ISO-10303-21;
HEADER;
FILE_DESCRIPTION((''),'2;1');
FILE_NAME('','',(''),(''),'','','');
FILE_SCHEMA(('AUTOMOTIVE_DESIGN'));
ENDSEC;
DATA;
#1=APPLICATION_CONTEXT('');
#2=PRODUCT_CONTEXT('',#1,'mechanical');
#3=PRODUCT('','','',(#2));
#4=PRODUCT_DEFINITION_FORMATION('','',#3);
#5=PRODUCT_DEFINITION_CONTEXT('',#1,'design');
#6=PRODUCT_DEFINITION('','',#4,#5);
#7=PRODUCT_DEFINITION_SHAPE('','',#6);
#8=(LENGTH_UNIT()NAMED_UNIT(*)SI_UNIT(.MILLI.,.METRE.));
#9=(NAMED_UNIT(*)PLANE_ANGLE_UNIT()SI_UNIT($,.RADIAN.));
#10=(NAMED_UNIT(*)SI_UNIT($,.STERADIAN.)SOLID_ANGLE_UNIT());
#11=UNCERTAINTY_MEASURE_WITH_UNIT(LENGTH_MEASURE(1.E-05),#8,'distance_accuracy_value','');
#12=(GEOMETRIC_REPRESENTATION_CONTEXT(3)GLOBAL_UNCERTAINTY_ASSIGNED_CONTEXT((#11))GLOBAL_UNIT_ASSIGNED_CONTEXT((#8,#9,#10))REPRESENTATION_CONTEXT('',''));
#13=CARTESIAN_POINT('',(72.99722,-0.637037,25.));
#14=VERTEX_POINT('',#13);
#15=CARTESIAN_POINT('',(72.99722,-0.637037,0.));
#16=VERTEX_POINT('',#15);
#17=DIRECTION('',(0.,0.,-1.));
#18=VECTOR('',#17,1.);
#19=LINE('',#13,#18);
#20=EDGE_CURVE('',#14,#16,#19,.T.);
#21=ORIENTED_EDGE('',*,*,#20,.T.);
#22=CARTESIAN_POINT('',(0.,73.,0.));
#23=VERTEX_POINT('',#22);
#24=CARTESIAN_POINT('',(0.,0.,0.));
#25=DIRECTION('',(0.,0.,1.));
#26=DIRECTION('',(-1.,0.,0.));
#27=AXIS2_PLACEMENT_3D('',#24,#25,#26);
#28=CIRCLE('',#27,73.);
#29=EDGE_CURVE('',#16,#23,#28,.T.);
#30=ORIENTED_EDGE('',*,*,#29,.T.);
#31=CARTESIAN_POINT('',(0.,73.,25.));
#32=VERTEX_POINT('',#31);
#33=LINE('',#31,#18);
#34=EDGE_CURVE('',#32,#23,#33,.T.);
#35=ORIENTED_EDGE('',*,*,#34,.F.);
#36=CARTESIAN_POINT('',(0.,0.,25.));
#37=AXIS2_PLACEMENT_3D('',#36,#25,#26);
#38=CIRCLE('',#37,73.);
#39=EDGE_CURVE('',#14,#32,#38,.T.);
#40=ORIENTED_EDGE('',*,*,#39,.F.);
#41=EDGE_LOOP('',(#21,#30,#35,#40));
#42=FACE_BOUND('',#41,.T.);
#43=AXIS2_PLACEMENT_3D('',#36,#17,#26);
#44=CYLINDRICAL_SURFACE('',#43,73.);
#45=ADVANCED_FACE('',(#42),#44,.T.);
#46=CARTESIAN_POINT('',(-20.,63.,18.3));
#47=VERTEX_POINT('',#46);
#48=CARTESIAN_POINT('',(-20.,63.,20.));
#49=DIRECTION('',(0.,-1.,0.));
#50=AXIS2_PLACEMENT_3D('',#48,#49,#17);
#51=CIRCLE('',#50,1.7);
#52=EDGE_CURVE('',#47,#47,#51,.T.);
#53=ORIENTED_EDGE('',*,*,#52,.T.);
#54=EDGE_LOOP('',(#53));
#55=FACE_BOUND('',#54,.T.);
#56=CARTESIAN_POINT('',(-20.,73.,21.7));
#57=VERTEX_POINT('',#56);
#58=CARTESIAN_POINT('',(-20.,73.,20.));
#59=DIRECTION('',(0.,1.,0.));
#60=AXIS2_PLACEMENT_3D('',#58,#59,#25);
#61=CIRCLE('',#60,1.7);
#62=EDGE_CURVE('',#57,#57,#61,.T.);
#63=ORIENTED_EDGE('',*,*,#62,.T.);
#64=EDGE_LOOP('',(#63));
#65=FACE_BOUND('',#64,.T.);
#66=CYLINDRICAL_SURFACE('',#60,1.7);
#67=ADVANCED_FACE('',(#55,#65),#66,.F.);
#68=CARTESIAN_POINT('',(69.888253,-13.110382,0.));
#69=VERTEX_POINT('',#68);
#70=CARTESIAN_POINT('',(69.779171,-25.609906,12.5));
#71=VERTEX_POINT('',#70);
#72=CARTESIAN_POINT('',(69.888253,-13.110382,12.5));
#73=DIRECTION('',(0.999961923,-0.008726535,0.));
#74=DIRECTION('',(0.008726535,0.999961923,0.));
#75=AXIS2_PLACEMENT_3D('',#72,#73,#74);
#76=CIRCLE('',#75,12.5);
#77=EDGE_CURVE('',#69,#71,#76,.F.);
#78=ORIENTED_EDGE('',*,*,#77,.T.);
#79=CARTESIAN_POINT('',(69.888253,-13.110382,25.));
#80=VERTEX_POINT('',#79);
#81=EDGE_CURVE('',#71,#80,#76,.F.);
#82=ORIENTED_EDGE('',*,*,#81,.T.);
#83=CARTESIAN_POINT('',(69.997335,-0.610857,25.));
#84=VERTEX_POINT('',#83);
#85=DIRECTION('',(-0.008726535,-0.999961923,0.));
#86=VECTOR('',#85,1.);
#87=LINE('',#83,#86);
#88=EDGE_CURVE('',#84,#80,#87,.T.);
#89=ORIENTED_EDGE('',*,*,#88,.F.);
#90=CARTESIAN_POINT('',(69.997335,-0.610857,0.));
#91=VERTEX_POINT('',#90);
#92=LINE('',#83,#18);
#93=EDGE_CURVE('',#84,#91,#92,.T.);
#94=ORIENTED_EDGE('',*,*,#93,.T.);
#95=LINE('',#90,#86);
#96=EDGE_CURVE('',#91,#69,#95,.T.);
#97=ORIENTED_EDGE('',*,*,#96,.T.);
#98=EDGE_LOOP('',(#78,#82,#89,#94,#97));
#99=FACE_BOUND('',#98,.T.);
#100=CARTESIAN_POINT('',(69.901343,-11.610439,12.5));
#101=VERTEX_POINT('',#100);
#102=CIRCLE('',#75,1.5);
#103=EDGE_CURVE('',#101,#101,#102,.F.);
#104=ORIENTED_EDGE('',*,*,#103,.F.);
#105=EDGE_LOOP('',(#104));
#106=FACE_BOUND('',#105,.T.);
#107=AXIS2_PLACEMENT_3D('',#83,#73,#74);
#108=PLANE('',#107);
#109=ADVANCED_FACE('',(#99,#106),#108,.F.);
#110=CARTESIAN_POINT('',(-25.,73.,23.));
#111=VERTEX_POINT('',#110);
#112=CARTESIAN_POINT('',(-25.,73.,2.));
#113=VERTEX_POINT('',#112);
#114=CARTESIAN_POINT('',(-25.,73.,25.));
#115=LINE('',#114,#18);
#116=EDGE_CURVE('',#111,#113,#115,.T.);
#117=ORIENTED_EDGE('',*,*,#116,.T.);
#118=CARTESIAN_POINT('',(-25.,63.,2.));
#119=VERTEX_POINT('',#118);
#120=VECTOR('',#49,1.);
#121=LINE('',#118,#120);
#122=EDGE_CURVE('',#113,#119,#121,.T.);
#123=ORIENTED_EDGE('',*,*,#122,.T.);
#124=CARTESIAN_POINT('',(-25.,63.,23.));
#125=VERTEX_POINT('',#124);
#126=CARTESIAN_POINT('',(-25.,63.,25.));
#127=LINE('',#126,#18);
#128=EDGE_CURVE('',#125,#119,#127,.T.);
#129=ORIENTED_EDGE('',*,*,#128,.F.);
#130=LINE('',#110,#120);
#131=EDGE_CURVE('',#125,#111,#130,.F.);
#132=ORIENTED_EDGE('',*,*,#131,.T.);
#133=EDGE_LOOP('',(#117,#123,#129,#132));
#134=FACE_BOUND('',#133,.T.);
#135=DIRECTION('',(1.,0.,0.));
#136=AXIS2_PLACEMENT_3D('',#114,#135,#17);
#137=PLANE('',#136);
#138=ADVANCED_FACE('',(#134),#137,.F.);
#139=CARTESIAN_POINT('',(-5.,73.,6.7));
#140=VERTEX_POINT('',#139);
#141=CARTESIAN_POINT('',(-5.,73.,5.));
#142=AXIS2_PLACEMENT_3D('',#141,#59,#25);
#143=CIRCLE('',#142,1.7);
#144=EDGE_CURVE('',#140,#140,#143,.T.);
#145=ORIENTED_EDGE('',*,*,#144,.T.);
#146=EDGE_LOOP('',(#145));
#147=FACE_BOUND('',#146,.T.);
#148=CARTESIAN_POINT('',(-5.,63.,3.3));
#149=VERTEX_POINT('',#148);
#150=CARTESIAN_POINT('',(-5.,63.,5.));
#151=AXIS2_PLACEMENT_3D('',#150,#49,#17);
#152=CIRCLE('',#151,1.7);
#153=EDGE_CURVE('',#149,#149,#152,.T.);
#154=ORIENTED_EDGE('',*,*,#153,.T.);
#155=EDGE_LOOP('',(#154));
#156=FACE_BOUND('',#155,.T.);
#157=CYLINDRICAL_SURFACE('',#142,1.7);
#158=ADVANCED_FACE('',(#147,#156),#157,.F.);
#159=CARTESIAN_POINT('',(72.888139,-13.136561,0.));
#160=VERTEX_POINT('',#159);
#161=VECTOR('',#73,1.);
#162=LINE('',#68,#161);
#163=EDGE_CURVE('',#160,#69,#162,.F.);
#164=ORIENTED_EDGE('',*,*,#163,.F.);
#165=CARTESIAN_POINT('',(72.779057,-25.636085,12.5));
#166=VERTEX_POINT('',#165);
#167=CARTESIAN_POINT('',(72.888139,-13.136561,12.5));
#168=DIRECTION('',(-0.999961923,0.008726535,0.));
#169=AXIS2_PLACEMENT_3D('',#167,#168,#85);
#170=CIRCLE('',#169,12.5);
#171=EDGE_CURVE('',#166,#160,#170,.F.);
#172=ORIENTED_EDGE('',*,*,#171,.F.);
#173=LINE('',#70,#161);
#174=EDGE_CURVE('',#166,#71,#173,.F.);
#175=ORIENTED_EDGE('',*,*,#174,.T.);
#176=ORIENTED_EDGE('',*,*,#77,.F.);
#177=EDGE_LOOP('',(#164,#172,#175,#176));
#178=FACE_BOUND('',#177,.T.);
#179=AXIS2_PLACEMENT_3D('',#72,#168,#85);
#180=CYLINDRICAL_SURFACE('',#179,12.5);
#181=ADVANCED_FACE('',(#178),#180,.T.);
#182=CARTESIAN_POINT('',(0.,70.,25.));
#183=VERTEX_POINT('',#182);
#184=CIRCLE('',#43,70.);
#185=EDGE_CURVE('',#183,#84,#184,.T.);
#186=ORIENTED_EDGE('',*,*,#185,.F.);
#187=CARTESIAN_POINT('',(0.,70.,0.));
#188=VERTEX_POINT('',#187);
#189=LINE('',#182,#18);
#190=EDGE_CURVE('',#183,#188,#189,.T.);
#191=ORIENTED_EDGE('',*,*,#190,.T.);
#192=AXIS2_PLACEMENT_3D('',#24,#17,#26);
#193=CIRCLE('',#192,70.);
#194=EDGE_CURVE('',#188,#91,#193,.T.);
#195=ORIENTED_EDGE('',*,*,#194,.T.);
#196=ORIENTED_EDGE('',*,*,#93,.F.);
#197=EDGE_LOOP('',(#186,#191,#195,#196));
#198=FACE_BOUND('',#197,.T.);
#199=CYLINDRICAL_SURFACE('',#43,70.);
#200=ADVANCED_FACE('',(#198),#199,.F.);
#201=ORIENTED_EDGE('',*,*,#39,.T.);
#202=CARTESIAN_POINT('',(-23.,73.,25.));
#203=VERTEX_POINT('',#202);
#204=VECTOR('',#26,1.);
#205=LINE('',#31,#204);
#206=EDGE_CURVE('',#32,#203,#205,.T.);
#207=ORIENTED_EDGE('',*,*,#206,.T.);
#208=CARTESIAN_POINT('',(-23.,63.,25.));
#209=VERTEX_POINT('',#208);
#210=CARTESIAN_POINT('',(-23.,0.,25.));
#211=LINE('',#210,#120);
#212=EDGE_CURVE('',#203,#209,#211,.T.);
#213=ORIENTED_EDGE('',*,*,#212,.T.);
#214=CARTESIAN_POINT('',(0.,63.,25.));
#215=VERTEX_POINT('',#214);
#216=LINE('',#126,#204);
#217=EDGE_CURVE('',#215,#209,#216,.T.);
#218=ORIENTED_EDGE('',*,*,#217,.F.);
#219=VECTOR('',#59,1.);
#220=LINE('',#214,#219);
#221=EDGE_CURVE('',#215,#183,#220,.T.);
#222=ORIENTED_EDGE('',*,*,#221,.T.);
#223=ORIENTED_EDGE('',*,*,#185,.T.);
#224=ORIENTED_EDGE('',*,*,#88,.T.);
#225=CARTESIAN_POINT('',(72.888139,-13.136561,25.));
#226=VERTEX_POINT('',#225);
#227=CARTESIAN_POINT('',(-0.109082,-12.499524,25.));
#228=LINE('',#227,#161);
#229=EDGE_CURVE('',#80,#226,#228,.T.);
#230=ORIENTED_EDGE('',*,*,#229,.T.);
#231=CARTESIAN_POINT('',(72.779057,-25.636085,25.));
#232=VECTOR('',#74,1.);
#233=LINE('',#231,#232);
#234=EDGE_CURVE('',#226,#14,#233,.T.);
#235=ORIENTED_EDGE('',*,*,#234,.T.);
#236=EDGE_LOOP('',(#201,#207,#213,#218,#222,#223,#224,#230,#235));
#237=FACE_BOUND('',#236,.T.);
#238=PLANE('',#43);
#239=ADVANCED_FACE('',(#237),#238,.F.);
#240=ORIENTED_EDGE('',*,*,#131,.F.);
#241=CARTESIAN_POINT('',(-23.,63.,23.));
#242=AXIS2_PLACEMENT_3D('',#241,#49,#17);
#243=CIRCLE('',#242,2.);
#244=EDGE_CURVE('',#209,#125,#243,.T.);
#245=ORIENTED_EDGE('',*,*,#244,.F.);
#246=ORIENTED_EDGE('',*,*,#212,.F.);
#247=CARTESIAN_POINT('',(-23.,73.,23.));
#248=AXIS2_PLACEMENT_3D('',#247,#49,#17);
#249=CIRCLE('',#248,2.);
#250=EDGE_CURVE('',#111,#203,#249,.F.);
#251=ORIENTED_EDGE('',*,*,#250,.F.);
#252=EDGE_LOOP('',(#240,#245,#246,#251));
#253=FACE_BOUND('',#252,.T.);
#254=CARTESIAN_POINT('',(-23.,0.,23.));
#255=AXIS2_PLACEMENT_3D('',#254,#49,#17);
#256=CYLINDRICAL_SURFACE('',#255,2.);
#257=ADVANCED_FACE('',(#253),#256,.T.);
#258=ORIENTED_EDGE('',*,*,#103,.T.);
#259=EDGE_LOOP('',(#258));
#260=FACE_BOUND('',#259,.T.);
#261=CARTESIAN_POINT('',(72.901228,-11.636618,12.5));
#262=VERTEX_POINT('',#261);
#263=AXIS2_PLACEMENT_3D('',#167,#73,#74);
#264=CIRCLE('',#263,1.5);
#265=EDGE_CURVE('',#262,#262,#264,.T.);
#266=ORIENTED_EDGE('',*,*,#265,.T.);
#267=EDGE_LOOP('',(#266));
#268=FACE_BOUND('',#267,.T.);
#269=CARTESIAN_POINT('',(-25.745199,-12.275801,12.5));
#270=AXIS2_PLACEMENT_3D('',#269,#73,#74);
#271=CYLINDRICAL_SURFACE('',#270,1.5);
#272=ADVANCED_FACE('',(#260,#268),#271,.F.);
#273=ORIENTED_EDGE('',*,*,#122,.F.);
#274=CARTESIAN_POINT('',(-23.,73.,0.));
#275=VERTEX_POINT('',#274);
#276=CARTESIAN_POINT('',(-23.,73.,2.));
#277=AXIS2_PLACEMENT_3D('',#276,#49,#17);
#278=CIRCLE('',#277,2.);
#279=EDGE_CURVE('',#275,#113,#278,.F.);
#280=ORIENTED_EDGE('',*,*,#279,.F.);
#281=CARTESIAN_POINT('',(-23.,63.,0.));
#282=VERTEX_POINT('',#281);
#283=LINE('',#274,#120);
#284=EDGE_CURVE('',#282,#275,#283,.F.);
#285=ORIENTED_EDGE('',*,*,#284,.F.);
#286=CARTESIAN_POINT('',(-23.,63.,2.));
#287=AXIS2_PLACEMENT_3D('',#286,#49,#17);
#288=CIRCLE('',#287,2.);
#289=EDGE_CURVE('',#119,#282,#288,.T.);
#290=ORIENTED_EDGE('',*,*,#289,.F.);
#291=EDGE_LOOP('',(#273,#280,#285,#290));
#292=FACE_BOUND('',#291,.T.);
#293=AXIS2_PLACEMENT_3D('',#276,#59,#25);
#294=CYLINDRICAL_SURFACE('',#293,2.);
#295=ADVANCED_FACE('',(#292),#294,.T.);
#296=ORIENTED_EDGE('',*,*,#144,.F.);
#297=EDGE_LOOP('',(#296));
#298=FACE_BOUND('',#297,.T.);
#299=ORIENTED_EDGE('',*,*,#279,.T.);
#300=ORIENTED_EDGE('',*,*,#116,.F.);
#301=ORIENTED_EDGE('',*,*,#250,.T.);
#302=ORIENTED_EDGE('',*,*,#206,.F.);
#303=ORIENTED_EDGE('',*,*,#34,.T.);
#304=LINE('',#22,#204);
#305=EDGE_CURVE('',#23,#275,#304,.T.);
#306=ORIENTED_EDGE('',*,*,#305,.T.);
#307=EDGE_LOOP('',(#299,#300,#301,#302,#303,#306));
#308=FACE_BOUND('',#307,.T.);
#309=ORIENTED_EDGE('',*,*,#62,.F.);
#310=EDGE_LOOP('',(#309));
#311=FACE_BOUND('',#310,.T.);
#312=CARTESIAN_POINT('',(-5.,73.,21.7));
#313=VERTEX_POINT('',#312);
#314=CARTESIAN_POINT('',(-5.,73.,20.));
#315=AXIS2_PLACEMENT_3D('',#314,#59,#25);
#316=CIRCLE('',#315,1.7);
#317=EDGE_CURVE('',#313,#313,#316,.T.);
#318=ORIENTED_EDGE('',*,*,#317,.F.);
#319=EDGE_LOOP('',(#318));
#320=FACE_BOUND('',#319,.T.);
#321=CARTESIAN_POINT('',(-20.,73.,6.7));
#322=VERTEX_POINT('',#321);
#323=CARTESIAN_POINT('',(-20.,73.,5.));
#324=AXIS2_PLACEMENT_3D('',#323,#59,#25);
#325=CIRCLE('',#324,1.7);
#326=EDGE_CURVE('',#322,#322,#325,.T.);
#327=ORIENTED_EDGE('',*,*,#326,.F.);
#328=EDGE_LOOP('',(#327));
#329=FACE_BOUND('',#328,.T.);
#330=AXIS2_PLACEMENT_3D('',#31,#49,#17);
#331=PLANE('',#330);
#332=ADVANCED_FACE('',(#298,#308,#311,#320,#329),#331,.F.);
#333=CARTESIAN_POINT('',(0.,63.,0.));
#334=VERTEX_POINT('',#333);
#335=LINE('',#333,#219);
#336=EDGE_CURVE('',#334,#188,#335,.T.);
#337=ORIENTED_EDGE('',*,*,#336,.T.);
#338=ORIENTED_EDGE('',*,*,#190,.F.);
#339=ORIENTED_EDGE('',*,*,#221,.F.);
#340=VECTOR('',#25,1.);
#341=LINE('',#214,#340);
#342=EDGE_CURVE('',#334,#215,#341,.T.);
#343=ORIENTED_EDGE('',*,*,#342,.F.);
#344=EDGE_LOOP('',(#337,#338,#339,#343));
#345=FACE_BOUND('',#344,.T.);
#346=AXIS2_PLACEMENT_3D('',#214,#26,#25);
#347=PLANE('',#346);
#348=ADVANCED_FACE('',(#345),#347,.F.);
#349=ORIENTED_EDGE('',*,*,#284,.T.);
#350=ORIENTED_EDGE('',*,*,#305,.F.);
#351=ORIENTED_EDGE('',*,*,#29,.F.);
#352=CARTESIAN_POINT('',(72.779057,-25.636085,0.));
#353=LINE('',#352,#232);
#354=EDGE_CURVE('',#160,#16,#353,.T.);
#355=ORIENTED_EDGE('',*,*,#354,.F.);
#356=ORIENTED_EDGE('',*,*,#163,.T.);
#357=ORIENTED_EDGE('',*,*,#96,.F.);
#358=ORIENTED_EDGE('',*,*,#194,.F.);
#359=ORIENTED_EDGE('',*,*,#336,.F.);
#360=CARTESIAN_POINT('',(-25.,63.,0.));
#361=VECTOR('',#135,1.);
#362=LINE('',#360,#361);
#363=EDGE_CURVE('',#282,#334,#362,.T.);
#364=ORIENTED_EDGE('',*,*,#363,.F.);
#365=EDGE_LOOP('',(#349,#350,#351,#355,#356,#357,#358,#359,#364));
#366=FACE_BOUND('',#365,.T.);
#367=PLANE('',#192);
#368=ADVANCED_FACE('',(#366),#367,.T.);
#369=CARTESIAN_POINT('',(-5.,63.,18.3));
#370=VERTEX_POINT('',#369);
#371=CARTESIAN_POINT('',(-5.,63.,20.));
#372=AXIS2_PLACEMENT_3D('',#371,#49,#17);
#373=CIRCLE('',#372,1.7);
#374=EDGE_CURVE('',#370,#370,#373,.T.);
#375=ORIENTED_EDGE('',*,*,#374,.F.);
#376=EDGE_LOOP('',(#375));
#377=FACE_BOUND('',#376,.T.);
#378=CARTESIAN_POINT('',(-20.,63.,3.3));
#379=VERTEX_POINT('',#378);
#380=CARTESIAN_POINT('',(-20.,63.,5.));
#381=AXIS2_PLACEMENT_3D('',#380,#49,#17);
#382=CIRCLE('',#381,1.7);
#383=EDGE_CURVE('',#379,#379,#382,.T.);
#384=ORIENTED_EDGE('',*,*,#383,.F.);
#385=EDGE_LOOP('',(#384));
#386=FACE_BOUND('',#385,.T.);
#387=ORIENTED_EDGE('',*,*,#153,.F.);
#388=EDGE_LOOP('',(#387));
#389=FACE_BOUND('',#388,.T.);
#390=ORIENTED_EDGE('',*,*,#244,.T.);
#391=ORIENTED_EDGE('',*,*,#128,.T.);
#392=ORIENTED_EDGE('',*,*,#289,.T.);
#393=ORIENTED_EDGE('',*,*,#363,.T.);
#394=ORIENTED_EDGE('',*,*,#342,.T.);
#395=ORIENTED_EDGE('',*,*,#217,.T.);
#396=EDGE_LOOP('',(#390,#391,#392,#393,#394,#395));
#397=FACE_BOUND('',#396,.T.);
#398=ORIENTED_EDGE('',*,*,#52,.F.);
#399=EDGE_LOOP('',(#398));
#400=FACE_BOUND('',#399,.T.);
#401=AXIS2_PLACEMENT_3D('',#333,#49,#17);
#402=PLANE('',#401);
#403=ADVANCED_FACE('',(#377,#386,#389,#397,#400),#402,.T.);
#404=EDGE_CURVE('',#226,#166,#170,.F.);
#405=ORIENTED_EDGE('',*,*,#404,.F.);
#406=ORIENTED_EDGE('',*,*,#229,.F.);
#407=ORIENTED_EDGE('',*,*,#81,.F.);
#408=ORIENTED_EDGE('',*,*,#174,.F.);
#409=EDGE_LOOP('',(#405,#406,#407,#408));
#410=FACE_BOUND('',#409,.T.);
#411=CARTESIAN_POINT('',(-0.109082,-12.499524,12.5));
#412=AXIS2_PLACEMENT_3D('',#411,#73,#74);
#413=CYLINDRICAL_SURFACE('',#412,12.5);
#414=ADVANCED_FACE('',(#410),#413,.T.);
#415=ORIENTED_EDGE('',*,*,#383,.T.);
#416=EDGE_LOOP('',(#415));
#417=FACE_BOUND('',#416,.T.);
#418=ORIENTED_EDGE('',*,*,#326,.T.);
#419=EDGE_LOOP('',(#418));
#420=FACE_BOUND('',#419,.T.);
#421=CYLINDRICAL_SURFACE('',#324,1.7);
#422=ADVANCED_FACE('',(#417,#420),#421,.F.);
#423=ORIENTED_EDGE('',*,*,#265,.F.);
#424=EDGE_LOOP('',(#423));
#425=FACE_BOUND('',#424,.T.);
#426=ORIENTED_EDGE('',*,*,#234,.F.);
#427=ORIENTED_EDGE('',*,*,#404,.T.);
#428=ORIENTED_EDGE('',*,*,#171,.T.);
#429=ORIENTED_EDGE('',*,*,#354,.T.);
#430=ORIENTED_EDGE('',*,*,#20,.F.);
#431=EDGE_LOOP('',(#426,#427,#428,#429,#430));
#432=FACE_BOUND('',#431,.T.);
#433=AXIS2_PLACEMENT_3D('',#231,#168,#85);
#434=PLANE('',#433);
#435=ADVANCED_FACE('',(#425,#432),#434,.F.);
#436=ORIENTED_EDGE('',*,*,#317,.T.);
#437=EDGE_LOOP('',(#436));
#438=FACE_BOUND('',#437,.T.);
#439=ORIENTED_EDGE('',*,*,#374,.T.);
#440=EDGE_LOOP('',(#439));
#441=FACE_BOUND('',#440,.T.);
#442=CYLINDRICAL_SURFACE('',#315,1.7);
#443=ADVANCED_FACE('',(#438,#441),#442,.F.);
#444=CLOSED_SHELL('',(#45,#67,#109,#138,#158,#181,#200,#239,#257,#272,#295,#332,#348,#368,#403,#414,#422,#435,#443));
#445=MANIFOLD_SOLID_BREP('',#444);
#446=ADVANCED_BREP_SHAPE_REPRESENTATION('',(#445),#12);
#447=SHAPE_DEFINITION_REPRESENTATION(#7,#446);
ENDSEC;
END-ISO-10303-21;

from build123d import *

# Parameters (mm, degrees)
BOSS_EXTRUDE1_DEPTH  = 25
CUT_EXTRUDE1_REACH   = 127.103
SKETCH6_R            = 1.5
FILLET1_R            = 12.5
SKETCH8_W            = 25
SKETCH8_H            = 25
BOSS_EXTRUDE2_DEPTH  = 7
FILLET2_R            = 2
M3_CLEARANCE_HOLE1_D = 3.4


with BuildPart() as part:
    # Sketch2 → Boss-Extrude1 (new body)
    with BuildSketch(Plane.XY):
        with BuildLine():
            Line((0, 73), (-25, 73))
            Line((-25, 73), (-25, 70))
            Line((-25, 70), (0, 70))
            ThreePointArc((0, 70), (49.712976294, 49.281030712), (69.997334614, -0.610857485))
            Line((69.997334614, -0.610857485), (69.779171227, -25.609905561))
            Line((69.779171227, -25.609905561), (72.779056996, -25.636085168))
            Line((72.779056996, -25.636085168), (72.997220384, -0.637037091))
            ThreePointArc((72.997220384, -0.637037091), (51.84353242, 51.393074885), (0, 73))
        make_face()
    extrude(amount=BOSS_EXTRUDE1_DEPTH)

    # Sketch6 → Cut-Extrude1 (cut, up to next)
    with BuildSketch(Plane(origin=(72.997220384, -0.637037091, 0), x_dir=(0, 0, -1), z_dir=(0.9999619230641714, -0.00872653549837746, 0)), mode=Mode.PRIVATE) as cut_extrude1_sk1:
        with Locations(Location((-12.5, -12.5, 0), (0, 0, 90))):
            Circle(SKETCH6_R)
    cut_extrude1_tool1 = extrude(cut_extrude1_sk1.sketch, amount=-CUT_EXTRUDE1_REACH, mode=Mode.PRIVATE) & part.part
    add(cut_extrude1_tool1.solids().sort_by_distance((72.888139, -13.136561, 12.5))[0], mode=Mode.SUBTRACT)

    # Fillet1
    fillet1_edges = [part.edges().sort_by_distance(p)[0] for p in [
        (71.279114112, -25.622995365, 0),
        (71.279114112, -25.622995365, 25),
    ]]
    fillet(fillet1_edges, radius=FILLET1_R - 0.0001)  # a hair under: the kernel refuses the full size

    # Sketch8 → Boss-Extrude2 (add)
    with BuildSketch(Plane.XZ.offset(-70)):
        with Locations((-12.5, 12.5)):
            Rectangle(SKETCH8_W, SKETCH8_H)
    extrude(amount=BOSS_EXTRUDE2_DEPTH)

    # Fillet2
    fillet2_edges = [part.edges().sort_by_distance(p)[0] for p in [
        (-25, 68, 25),
        (-25, 68, 0),
    ]]
    fillet(fillet2_edges, radius=FILLET2_R)

    # M3 Clearance Hole1 (through all)
    with Locations(Plane(origin=(0, 73, 0), x_dir=(1, 0, 0), z_dir=(0, 1, 0))):
        with Locations((-20, -5), (-5, -20), (-20, -20), (-5, -5)):
            Hole(M3_CLEARANCE_HOLE1_D / 2)


solid = part.part
